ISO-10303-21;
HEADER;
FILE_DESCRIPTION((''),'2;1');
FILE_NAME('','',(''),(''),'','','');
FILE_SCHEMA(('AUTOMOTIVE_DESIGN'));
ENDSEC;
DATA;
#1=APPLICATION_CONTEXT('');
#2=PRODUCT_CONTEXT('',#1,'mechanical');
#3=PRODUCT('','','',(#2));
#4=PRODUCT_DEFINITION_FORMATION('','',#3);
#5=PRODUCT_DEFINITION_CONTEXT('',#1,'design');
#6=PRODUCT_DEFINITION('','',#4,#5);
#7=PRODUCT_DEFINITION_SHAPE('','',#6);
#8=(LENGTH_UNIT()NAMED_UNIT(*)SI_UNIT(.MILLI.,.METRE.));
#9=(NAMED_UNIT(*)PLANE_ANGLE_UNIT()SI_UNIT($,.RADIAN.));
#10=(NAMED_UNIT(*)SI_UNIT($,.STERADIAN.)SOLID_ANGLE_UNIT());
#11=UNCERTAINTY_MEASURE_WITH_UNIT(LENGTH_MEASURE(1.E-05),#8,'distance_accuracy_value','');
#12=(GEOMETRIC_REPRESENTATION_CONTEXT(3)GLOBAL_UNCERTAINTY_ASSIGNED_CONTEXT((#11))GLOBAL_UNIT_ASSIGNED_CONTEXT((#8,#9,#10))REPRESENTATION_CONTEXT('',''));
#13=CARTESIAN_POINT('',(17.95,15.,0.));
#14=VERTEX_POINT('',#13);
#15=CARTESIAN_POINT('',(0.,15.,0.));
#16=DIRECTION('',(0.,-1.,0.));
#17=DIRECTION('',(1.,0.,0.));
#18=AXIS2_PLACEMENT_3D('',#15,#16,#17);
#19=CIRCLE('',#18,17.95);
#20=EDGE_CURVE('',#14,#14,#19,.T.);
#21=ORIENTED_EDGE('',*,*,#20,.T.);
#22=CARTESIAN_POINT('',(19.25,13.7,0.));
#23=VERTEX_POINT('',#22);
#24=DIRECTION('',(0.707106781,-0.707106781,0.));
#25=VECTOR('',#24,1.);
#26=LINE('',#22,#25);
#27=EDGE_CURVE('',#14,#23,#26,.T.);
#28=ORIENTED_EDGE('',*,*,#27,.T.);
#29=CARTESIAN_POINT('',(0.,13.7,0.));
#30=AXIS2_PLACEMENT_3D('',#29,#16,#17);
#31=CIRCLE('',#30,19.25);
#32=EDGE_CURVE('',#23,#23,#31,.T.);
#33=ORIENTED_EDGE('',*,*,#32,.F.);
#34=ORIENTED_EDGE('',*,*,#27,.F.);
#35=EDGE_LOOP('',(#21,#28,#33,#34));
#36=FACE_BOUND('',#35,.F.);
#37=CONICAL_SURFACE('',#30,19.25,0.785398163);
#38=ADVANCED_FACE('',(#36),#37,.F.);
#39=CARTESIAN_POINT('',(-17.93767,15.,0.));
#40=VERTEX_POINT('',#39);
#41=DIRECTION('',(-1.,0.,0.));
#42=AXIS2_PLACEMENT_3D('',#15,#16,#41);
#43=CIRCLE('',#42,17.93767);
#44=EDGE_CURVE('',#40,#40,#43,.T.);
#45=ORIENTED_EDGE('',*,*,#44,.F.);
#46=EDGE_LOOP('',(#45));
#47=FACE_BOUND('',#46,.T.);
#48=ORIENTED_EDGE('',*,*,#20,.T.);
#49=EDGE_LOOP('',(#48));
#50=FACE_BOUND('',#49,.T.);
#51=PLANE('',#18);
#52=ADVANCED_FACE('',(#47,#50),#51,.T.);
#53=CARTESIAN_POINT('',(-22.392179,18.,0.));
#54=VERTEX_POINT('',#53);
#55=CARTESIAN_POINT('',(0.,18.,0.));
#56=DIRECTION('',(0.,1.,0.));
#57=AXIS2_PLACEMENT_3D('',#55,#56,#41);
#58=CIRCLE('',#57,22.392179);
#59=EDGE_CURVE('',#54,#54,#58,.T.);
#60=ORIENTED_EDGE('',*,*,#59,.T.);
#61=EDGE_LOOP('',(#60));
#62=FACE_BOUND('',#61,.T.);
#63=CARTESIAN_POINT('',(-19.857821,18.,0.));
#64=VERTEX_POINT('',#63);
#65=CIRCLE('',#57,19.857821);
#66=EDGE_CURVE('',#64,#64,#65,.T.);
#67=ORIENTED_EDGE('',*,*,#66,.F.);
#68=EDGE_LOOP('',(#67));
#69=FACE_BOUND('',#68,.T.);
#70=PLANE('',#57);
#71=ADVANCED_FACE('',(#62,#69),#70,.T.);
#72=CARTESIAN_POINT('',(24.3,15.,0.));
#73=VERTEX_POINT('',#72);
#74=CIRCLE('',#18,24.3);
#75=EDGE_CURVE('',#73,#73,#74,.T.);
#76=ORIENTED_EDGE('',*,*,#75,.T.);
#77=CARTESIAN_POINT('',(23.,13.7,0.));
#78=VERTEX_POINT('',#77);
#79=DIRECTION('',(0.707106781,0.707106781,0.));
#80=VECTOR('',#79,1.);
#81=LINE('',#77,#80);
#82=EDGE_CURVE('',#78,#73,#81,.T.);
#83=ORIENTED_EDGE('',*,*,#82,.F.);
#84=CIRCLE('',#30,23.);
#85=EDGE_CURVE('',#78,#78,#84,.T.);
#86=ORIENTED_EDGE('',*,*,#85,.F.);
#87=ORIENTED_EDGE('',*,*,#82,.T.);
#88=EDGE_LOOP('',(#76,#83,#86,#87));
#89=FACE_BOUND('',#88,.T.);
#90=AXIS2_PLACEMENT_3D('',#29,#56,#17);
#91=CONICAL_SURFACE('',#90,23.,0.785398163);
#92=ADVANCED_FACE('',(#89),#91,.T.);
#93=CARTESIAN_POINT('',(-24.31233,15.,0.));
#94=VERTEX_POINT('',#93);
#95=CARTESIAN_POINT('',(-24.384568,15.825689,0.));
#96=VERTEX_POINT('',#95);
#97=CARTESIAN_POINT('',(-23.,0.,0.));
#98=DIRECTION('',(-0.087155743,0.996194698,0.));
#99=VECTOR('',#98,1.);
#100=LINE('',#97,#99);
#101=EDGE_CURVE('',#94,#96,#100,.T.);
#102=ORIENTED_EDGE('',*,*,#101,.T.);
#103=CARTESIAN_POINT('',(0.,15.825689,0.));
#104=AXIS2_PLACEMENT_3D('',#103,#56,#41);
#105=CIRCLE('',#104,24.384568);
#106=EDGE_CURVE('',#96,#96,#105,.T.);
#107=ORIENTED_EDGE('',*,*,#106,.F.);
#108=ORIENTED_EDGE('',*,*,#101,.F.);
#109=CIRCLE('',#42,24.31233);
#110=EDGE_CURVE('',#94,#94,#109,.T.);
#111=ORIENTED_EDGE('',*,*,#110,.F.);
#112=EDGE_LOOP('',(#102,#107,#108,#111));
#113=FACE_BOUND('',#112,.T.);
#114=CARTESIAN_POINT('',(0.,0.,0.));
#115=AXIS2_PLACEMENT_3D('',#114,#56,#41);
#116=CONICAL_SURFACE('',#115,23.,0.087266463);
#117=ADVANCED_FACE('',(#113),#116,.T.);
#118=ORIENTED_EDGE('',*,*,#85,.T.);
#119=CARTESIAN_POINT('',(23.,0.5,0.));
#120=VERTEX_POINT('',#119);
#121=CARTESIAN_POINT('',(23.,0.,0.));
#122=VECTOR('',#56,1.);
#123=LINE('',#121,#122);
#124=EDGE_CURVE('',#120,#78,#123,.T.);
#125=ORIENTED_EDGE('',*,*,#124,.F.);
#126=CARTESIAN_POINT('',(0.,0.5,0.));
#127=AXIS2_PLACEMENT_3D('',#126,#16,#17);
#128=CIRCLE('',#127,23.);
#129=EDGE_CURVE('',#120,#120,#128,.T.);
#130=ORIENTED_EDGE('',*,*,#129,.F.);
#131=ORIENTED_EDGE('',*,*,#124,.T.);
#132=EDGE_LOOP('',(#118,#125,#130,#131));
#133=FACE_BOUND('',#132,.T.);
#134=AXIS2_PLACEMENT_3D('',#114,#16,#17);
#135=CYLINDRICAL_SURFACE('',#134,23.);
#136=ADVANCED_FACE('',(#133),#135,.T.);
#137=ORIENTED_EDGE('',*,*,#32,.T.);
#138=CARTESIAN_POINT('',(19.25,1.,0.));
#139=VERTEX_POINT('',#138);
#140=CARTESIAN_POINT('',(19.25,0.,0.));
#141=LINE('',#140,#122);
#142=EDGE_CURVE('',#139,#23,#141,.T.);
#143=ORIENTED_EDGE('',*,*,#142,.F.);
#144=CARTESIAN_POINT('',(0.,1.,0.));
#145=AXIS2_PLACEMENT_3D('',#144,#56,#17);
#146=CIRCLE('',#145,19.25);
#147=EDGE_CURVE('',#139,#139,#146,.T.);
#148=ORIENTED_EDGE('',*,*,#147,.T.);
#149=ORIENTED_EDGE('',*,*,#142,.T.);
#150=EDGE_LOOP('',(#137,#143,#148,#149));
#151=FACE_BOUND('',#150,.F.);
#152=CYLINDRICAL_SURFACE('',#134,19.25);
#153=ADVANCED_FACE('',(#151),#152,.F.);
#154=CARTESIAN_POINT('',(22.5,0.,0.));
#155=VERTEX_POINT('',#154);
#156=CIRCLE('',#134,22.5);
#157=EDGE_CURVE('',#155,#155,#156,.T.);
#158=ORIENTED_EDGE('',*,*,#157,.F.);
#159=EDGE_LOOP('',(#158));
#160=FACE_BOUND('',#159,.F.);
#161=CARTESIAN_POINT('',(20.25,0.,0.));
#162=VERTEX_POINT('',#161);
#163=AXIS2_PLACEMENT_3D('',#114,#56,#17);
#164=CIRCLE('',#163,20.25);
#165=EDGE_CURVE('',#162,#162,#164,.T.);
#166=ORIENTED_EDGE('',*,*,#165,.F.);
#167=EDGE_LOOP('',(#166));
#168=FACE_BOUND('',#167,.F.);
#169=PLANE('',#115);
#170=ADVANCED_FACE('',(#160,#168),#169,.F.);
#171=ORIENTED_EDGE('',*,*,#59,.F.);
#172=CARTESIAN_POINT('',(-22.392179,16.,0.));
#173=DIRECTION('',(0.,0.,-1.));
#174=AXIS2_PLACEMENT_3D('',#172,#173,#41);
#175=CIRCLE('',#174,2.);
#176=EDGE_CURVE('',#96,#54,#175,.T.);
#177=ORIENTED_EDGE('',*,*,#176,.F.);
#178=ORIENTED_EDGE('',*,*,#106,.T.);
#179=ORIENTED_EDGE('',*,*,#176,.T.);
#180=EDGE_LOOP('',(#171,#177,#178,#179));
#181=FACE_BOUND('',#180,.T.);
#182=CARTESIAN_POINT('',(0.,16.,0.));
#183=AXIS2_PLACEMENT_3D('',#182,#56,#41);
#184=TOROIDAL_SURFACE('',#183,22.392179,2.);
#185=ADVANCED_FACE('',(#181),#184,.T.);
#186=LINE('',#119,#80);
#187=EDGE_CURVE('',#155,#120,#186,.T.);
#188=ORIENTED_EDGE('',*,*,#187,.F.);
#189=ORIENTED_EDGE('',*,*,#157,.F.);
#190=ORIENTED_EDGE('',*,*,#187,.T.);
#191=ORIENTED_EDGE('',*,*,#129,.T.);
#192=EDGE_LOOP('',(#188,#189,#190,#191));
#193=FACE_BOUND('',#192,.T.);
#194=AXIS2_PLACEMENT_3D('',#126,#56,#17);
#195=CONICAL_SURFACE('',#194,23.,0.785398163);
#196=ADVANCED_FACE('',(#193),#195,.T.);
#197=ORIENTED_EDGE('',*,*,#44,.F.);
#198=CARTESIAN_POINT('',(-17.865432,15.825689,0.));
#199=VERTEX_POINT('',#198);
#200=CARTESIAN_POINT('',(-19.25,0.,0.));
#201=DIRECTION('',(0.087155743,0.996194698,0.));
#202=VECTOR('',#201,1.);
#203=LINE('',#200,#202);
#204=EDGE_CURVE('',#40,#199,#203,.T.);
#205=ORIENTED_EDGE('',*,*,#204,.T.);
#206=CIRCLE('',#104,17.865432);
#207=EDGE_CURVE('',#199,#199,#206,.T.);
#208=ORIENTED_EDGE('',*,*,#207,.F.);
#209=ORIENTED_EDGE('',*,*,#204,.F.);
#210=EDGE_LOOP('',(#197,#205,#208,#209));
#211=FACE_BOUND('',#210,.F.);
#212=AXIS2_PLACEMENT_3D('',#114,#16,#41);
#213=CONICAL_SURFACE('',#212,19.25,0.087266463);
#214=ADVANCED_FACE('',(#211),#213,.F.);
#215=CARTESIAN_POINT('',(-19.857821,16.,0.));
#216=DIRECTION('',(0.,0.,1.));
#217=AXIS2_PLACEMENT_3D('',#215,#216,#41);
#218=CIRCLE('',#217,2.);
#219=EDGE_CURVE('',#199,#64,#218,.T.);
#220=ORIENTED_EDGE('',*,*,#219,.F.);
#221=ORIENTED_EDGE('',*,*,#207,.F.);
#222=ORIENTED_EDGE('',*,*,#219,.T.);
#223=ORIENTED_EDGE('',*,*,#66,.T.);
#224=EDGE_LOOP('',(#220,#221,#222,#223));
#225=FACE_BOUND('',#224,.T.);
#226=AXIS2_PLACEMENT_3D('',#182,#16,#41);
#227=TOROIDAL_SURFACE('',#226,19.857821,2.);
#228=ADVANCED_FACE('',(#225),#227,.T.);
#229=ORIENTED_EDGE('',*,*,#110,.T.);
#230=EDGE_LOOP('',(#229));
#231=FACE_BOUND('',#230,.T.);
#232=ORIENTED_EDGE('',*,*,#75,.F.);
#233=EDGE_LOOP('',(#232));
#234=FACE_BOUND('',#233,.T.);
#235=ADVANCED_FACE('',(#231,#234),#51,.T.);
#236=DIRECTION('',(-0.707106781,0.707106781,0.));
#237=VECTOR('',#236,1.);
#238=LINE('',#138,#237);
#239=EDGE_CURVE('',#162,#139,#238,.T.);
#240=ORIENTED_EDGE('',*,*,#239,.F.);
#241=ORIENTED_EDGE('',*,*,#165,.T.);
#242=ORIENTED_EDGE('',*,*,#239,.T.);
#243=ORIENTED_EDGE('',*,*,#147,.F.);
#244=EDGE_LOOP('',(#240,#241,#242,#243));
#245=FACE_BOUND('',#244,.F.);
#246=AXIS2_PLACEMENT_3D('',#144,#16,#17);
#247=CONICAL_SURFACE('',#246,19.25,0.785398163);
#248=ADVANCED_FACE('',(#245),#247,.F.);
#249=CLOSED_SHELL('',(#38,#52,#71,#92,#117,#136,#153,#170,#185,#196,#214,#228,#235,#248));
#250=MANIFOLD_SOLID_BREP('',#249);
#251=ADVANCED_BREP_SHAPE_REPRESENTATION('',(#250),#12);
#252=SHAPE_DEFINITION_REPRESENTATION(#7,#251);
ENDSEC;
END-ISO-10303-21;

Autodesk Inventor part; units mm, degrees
ref_plane "YZ Plane" through (0, 0, 0) normal (1, 0, 0) x (0, 1, 0)
ref_plane "XZ Plane" through (0, 0, 0) normal (0, 1, 0) x (-1, 0, 0)
ref_plane "XY Plane" through (0, 0, 0) normal (0, 0, 1) x (1, 0, 0)
sketch "Sketch1" plane through (0, 0, 0) normal (0, 1, 0) x (-1, 0, 0)
  circle A0 centre (0, 0) radius 23
  circle A1 centre (0, 0) radius 19.25
  dimension "d2" = 46
  dimension "d3" = 38.5
extrude "Extrusion1" add sketch "Sketch1" along normal blind 18 draft 5
sketch "Sketch2" plane through (0, 0, 0) normal (0, -1, 0) x (1, 0, 0)
  circle A0 centre (0, 0) radius 19.25 projected
  circle A1 centre (0, 0) radius 23 projected
  circle A2 centre (0, 0) radius 24.5748 projected
  circle A3 centre (0, 0) radius 17.6752 projected
extrude "Extrusion2" cut sketch "Sketch2" against normal blind 15 contours A0 | A2 | A3
chamfer "Chamfer1" distance 1.3 angle 45 1 edges at (-23, 15, 0)
chamfer "Chamfer2" distance 1 angle 45 1 edges at (-19.25, 0, 0)
chamfer "Chamfer3" distance 0.5 angle 45 1 edges at (-23, 0, 0)
fillet "Fillet1" radius 2 2 edges at (17.6752, 18, 0) (24.5748, 18, 0)
chamfer "Chamfer4" distance 1.3 angle 45 1 edges at (-19.25, 15, 0)
properties part number "mesh-reseater"
